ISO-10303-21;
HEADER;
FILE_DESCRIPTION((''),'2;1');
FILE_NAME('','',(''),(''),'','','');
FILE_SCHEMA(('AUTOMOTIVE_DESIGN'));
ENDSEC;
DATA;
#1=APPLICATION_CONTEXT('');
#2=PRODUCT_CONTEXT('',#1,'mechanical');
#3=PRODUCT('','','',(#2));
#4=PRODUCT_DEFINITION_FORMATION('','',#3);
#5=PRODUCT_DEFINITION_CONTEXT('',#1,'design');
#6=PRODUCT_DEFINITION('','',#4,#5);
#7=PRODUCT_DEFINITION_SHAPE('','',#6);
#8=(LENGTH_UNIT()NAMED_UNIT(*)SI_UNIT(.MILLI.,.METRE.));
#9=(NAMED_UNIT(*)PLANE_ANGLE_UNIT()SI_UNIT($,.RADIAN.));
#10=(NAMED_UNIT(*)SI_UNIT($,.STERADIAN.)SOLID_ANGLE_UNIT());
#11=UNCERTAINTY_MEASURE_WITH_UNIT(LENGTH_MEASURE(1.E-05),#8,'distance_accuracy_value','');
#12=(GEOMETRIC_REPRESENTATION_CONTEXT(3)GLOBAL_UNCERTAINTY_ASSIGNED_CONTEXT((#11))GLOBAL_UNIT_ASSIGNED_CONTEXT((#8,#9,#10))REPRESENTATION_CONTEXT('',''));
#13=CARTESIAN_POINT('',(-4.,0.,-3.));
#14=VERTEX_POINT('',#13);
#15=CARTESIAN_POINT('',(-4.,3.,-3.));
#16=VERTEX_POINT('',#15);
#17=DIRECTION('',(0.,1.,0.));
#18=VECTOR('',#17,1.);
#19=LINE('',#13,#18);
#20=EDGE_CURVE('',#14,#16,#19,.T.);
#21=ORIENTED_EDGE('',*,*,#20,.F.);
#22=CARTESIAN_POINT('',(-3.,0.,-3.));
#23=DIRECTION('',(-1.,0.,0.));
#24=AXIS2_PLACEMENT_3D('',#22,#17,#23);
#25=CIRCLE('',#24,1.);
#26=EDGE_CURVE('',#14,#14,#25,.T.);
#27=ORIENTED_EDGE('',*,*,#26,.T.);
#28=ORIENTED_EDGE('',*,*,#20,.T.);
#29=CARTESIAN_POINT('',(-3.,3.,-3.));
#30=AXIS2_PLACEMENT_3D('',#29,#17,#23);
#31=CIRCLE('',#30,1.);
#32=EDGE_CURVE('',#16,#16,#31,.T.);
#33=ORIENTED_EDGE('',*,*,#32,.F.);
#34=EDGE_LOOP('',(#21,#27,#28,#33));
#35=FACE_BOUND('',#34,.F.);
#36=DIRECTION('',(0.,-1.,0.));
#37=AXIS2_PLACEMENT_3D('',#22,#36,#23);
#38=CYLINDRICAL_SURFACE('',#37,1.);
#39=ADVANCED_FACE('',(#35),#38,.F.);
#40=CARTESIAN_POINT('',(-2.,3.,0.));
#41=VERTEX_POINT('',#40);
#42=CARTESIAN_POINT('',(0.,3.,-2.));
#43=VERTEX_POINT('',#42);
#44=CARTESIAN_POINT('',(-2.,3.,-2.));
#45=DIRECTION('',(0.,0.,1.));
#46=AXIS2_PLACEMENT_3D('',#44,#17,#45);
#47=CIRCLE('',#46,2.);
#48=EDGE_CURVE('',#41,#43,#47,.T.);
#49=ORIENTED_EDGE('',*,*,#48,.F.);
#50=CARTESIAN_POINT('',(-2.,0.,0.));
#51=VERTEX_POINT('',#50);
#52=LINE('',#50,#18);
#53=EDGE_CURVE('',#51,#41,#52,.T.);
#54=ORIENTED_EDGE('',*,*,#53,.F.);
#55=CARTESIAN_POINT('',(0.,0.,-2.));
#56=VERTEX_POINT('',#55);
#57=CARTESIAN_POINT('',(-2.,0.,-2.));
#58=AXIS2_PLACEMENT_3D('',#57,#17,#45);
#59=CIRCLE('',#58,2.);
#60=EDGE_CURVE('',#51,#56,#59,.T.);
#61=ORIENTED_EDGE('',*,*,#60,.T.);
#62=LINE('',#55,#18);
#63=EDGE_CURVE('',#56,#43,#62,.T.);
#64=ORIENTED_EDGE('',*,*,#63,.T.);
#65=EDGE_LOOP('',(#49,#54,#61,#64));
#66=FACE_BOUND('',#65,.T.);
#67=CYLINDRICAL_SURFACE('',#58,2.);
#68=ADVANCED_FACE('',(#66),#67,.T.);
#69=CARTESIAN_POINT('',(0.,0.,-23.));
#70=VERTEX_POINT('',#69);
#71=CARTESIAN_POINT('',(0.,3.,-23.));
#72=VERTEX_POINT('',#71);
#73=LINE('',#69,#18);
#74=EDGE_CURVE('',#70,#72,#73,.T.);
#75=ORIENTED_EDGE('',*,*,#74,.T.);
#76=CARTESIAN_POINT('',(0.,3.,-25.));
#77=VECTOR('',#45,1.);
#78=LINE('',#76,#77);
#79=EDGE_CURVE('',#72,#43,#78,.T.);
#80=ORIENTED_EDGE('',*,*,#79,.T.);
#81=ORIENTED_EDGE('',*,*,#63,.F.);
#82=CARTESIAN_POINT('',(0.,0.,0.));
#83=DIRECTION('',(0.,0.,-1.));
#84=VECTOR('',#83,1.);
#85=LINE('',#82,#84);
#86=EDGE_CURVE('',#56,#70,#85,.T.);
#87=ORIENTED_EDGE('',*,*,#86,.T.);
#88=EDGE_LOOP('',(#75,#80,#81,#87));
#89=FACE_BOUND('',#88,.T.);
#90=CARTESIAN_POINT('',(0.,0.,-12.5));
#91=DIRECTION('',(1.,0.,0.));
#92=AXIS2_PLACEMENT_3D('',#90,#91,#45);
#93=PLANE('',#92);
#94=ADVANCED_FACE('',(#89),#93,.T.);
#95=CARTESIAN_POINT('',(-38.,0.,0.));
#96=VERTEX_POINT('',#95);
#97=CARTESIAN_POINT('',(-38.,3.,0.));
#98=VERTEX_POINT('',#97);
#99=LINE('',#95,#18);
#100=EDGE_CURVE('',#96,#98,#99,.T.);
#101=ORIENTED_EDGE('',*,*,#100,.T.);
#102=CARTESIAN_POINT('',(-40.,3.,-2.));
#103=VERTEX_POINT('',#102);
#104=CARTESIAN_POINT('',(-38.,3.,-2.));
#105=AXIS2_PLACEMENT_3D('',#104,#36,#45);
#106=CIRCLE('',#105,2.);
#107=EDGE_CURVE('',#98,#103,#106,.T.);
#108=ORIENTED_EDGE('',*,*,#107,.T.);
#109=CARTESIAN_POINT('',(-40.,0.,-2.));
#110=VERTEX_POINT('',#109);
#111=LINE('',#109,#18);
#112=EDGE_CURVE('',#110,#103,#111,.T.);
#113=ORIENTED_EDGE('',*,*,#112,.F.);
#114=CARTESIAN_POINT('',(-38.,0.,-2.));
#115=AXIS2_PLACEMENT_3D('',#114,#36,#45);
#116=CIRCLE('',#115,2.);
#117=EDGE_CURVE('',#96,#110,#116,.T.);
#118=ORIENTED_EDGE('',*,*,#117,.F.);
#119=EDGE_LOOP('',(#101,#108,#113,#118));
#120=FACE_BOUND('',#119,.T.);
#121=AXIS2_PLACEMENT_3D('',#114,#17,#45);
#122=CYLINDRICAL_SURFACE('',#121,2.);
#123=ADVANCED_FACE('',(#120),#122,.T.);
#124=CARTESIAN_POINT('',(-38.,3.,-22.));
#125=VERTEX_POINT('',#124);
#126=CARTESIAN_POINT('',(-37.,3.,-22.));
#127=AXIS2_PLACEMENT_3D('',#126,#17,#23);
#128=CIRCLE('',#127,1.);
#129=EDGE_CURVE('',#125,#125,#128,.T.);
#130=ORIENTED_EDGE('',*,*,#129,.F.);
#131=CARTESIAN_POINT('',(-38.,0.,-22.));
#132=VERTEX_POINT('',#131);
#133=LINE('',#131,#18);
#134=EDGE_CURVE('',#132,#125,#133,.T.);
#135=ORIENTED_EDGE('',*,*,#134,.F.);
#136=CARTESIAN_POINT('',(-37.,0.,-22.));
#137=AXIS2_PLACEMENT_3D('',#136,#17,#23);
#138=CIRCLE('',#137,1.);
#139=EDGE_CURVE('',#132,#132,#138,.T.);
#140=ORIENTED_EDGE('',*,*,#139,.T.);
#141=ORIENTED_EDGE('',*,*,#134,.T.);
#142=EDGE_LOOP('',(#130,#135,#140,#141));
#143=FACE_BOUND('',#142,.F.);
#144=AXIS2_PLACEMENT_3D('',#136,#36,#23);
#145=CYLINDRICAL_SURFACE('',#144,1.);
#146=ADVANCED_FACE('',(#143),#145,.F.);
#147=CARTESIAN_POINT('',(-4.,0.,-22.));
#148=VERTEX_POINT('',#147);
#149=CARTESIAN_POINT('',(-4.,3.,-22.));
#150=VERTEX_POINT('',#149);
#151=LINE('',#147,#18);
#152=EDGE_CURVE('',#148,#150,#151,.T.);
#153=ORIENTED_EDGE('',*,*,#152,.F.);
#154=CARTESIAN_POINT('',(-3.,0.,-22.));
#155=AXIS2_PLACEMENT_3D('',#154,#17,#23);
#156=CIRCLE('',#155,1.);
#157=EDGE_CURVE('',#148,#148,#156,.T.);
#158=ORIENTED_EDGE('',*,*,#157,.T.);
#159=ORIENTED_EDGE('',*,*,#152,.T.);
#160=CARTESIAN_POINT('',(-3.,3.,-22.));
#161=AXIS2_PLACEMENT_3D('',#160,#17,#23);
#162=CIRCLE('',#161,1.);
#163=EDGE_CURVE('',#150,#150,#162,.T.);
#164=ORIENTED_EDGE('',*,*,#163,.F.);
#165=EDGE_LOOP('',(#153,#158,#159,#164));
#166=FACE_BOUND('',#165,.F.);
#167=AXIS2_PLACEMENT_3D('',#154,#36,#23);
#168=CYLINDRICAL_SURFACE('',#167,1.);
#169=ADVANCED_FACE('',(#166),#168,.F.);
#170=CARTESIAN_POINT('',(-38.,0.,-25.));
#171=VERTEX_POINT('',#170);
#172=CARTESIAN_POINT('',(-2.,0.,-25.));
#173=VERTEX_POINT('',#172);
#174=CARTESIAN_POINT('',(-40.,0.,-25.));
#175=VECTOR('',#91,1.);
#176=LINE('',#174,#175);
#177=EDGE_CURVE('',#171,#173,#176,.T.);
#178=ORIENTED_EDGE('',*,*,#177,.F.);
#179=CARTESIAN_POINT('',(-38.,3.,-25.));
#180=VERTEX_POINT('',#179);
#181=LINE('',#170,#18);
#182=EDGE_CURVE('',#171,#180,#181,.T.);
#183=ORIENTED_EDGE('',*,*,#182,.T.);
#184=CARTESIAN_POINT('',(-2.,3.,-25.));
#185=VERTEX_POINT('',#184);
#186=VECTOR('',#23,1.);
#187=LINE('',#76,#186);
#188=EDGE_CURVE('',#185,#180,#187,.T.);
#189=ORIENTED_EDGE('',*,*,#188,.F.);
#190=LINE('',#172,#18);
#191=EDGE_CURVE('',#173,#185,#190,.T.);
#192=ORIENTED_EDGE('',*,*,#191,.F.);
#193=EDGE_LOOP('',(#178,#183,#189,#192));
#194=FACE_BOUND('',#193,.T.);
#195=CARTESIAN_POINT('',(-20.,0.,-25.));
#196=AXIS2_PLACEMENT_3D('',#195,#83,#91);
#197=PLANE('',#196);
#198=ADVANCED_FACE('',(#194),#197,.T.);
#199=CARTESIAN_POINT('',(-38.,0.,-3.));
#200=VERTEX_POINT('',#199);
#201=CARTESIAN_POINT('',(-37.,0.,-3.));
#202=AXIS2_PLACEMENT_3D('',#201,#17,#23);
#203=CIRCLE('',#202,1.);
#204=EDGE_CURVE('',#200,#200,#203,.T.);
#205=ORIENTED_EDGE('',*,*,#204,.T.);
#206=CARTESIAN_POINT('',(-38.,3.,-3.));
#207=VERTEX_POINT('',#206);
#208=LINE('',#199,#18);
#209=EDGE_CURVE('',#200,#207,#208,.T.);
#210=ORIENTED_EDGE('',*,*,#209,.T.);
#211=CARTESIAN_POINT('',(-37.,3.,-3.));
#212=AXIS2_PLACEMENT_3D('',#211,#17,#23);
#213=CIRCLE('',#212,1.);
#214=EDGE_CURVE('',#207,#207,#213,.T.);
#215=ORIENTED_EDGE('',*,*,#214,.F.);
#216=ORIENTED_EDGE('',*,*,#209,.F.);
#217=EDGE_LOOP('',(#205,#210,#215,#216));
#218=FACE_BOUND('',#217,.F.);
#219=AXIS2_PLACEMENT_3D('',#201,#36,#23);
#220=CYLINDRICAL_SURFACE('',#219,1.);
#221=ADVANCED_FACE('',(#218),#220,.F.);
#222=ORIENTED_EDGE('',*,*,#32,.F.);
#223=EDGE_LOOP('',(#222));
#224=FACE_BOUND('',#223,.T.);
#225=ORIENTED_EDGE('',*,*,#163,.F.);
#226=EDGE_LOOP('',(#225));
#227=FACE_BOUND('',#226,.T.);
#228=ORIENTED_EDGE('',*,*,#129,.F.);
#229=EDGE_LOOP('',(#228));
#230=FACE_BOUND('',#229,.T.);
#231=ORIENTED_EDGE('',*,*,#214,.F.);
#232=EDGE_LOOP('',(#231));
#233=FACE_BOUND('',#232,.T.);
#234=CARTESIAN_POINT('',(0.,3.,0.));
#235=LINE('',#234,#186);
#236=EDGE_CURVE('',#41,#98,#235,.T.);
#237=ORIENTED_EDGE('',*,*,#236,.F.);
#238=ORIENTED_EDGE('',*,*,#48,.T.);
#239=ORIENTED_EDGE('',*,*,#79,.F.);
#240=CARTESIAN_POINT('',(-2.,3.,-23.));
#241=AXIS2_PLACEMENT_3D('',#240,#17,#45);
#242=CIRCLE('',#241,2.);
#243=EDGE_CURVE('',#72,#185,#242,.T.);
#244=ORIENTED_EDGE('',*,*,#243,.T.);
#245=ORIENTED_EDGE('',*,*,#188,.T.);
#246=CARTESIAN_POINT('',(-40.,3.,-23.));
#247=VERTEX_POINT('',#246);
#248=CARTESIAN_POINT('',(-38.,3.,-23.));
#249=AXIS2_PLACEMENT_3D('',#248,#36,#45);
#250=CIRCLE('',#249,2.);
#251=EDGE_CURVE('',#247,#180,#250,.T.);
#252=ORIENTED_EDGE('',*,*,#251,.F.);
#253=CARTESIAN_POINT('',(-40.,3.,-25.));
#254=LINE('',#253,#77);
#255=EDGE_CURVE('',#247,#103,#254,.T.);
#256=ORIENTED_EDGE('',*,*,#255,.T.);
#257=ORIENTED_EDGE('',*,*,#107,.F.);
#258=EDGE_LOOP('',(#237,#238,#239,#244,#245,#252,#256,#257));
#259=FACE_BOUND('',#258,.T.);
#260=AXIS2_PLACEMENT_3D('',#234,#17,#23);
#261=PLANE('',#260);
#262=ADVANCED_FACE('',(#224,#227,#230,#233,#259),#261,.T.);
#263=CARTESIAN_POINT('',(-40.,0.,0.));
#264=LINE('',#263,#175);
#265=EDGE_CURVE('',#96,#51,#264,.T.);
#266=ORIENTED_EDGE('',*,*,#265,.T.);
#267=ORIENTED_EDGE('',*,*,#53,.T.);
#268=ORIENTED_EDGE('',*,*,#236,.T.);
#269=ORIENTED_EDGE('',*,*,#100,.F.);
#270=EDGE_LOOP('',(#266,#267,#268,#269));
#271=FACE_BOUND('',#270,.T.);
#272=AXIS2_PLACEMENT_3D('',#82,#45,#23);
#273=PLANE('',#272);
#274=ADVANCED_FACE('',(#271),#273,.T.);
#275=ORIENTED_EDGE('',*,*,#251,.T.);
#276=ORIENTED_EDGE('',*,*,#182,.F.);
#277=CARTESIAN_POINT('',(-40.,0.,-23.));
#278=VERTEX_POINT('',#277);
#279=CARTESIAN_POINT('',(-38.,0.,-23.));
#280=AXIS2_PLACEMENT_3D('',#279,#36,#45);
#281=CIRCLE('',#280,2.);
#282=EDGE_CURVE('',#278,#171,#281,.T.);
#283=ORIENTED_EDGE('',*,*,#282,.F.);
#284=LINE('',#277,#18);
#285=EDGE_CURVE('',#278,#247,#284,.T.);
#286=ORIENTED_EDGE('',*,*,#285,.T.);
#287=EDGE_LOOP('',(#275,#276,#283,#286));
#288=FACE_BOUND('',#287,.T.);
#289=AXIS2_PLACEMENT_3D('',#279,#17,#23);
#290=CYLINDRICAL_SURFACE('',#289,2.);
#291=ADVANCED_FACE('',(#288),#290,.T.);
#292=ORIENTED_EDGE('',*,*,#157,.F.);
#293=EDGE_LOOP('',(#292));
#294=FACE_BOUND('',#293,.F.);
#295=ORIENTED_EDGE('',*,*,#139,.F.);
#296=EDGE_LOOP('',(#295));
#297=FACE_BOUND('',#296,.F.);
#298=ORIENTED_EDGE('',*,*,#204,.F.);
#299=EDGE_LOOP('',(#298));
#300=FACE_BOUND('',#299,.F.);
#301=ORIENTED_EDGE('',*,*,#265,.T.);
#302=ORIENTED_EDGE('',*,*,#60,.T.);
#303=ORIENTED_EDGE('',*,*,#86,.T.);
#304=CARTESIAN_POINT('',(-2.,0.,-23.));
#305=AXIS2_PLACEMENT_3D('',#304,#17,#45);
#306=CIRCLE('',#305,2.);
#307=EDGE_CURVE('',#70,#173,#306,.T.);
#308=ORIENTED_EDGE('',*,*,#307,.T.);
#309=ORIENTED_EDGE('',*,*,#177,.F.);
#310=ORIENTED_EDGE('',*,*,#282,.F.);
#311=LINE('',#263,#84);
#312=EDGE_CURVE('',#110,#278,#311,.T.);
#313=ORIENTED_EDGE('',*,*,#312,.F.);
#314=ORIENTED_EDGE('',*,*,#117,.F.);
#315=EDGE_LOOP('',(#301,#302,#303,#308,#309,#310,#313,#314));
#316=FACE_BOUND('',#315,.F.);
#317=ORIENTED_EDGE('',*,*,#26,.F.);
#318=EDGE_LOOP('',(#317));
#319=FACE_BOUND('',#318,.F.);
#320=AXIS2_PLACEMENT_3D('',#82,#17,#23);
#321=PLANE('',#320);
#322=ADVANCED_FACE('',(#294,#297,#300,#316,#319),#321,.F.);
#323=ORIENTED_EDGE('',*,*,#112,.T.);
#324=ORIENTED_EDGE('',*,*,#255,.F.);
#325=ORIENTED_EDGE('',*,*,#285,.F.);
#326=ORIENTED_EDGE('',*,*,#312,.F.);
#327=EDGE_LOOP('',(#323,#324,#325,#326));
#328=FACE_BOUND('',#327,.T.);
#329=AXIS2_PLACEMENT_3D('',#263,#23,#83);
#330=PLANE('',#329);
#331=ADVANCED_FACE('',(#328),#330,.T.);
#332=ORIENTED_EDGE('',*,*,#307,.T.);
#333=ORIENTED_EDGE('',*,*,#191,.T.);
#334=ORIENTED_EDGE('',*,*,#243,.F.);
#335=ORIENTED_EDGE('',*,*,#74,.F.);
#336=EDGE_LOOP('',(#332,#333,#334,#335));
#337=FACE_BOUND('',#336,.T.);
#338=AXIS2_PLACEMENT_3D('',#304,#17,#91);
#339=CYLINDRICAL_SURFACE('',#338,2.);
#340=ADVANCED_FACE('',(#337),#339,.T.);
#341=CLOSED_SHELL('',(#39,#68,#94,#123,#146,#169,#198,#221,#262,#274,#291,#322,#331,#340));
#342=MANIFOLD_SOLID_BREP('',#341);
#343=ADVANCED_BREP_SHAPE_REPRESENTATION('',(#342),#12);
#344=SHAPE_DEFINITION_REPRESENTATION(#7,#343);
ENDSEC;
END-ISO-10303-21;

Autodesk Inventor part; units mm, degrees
ref_plane "YZ Plane" through (0, 0, 0) normal (1, 0, 0) x (0, 1, 0)
ref_plane "XZ Plane" through (0, 0, 0) normal (0, 1, 0) x (-1, 0, 0)
ref_plane "XY Plane" through (0, 0, 0) normal (0, 0, 1) x (1, 0, 0)
sketch "Sketch1" plane through (0, 0, 0) normal (0, 1, 0) x (-1, 0, 0)
  line L0 (0, 0) -> (40, 0)
  line L1 (40, 0) -> (40, -25)
  line L2 (40, -25) -> (0, -25)
  line L3 (0, -25) -> (0, 0)
  circle A0 centre (37, -3) radius 1
  line L4 (40, -12.5) -> (0, -12.5)
  line L5 (20, 0) -> (20, -25)
  circle A1 centre (37, -22) radius 1
  circle A2 centre (3, -3) radius 1
  circle A3 centre (3, -22) radius 1
  dimension "d0" = 40
  dimension "d1" = 25
  dimension "d2" = 2
  dimension "d3" = 3
  dimension "d4" = 3
extrude "Extrusion1" add sketch "Sketch1" along normal blind 3
fillet "Fillet1" radius 2 4 edges at (0, 1.5, 0) (0, 1.5, -25) (-40, 1.5, -25) (-40, 1.5, 0)
properties part number "SpojovaciDeska"
